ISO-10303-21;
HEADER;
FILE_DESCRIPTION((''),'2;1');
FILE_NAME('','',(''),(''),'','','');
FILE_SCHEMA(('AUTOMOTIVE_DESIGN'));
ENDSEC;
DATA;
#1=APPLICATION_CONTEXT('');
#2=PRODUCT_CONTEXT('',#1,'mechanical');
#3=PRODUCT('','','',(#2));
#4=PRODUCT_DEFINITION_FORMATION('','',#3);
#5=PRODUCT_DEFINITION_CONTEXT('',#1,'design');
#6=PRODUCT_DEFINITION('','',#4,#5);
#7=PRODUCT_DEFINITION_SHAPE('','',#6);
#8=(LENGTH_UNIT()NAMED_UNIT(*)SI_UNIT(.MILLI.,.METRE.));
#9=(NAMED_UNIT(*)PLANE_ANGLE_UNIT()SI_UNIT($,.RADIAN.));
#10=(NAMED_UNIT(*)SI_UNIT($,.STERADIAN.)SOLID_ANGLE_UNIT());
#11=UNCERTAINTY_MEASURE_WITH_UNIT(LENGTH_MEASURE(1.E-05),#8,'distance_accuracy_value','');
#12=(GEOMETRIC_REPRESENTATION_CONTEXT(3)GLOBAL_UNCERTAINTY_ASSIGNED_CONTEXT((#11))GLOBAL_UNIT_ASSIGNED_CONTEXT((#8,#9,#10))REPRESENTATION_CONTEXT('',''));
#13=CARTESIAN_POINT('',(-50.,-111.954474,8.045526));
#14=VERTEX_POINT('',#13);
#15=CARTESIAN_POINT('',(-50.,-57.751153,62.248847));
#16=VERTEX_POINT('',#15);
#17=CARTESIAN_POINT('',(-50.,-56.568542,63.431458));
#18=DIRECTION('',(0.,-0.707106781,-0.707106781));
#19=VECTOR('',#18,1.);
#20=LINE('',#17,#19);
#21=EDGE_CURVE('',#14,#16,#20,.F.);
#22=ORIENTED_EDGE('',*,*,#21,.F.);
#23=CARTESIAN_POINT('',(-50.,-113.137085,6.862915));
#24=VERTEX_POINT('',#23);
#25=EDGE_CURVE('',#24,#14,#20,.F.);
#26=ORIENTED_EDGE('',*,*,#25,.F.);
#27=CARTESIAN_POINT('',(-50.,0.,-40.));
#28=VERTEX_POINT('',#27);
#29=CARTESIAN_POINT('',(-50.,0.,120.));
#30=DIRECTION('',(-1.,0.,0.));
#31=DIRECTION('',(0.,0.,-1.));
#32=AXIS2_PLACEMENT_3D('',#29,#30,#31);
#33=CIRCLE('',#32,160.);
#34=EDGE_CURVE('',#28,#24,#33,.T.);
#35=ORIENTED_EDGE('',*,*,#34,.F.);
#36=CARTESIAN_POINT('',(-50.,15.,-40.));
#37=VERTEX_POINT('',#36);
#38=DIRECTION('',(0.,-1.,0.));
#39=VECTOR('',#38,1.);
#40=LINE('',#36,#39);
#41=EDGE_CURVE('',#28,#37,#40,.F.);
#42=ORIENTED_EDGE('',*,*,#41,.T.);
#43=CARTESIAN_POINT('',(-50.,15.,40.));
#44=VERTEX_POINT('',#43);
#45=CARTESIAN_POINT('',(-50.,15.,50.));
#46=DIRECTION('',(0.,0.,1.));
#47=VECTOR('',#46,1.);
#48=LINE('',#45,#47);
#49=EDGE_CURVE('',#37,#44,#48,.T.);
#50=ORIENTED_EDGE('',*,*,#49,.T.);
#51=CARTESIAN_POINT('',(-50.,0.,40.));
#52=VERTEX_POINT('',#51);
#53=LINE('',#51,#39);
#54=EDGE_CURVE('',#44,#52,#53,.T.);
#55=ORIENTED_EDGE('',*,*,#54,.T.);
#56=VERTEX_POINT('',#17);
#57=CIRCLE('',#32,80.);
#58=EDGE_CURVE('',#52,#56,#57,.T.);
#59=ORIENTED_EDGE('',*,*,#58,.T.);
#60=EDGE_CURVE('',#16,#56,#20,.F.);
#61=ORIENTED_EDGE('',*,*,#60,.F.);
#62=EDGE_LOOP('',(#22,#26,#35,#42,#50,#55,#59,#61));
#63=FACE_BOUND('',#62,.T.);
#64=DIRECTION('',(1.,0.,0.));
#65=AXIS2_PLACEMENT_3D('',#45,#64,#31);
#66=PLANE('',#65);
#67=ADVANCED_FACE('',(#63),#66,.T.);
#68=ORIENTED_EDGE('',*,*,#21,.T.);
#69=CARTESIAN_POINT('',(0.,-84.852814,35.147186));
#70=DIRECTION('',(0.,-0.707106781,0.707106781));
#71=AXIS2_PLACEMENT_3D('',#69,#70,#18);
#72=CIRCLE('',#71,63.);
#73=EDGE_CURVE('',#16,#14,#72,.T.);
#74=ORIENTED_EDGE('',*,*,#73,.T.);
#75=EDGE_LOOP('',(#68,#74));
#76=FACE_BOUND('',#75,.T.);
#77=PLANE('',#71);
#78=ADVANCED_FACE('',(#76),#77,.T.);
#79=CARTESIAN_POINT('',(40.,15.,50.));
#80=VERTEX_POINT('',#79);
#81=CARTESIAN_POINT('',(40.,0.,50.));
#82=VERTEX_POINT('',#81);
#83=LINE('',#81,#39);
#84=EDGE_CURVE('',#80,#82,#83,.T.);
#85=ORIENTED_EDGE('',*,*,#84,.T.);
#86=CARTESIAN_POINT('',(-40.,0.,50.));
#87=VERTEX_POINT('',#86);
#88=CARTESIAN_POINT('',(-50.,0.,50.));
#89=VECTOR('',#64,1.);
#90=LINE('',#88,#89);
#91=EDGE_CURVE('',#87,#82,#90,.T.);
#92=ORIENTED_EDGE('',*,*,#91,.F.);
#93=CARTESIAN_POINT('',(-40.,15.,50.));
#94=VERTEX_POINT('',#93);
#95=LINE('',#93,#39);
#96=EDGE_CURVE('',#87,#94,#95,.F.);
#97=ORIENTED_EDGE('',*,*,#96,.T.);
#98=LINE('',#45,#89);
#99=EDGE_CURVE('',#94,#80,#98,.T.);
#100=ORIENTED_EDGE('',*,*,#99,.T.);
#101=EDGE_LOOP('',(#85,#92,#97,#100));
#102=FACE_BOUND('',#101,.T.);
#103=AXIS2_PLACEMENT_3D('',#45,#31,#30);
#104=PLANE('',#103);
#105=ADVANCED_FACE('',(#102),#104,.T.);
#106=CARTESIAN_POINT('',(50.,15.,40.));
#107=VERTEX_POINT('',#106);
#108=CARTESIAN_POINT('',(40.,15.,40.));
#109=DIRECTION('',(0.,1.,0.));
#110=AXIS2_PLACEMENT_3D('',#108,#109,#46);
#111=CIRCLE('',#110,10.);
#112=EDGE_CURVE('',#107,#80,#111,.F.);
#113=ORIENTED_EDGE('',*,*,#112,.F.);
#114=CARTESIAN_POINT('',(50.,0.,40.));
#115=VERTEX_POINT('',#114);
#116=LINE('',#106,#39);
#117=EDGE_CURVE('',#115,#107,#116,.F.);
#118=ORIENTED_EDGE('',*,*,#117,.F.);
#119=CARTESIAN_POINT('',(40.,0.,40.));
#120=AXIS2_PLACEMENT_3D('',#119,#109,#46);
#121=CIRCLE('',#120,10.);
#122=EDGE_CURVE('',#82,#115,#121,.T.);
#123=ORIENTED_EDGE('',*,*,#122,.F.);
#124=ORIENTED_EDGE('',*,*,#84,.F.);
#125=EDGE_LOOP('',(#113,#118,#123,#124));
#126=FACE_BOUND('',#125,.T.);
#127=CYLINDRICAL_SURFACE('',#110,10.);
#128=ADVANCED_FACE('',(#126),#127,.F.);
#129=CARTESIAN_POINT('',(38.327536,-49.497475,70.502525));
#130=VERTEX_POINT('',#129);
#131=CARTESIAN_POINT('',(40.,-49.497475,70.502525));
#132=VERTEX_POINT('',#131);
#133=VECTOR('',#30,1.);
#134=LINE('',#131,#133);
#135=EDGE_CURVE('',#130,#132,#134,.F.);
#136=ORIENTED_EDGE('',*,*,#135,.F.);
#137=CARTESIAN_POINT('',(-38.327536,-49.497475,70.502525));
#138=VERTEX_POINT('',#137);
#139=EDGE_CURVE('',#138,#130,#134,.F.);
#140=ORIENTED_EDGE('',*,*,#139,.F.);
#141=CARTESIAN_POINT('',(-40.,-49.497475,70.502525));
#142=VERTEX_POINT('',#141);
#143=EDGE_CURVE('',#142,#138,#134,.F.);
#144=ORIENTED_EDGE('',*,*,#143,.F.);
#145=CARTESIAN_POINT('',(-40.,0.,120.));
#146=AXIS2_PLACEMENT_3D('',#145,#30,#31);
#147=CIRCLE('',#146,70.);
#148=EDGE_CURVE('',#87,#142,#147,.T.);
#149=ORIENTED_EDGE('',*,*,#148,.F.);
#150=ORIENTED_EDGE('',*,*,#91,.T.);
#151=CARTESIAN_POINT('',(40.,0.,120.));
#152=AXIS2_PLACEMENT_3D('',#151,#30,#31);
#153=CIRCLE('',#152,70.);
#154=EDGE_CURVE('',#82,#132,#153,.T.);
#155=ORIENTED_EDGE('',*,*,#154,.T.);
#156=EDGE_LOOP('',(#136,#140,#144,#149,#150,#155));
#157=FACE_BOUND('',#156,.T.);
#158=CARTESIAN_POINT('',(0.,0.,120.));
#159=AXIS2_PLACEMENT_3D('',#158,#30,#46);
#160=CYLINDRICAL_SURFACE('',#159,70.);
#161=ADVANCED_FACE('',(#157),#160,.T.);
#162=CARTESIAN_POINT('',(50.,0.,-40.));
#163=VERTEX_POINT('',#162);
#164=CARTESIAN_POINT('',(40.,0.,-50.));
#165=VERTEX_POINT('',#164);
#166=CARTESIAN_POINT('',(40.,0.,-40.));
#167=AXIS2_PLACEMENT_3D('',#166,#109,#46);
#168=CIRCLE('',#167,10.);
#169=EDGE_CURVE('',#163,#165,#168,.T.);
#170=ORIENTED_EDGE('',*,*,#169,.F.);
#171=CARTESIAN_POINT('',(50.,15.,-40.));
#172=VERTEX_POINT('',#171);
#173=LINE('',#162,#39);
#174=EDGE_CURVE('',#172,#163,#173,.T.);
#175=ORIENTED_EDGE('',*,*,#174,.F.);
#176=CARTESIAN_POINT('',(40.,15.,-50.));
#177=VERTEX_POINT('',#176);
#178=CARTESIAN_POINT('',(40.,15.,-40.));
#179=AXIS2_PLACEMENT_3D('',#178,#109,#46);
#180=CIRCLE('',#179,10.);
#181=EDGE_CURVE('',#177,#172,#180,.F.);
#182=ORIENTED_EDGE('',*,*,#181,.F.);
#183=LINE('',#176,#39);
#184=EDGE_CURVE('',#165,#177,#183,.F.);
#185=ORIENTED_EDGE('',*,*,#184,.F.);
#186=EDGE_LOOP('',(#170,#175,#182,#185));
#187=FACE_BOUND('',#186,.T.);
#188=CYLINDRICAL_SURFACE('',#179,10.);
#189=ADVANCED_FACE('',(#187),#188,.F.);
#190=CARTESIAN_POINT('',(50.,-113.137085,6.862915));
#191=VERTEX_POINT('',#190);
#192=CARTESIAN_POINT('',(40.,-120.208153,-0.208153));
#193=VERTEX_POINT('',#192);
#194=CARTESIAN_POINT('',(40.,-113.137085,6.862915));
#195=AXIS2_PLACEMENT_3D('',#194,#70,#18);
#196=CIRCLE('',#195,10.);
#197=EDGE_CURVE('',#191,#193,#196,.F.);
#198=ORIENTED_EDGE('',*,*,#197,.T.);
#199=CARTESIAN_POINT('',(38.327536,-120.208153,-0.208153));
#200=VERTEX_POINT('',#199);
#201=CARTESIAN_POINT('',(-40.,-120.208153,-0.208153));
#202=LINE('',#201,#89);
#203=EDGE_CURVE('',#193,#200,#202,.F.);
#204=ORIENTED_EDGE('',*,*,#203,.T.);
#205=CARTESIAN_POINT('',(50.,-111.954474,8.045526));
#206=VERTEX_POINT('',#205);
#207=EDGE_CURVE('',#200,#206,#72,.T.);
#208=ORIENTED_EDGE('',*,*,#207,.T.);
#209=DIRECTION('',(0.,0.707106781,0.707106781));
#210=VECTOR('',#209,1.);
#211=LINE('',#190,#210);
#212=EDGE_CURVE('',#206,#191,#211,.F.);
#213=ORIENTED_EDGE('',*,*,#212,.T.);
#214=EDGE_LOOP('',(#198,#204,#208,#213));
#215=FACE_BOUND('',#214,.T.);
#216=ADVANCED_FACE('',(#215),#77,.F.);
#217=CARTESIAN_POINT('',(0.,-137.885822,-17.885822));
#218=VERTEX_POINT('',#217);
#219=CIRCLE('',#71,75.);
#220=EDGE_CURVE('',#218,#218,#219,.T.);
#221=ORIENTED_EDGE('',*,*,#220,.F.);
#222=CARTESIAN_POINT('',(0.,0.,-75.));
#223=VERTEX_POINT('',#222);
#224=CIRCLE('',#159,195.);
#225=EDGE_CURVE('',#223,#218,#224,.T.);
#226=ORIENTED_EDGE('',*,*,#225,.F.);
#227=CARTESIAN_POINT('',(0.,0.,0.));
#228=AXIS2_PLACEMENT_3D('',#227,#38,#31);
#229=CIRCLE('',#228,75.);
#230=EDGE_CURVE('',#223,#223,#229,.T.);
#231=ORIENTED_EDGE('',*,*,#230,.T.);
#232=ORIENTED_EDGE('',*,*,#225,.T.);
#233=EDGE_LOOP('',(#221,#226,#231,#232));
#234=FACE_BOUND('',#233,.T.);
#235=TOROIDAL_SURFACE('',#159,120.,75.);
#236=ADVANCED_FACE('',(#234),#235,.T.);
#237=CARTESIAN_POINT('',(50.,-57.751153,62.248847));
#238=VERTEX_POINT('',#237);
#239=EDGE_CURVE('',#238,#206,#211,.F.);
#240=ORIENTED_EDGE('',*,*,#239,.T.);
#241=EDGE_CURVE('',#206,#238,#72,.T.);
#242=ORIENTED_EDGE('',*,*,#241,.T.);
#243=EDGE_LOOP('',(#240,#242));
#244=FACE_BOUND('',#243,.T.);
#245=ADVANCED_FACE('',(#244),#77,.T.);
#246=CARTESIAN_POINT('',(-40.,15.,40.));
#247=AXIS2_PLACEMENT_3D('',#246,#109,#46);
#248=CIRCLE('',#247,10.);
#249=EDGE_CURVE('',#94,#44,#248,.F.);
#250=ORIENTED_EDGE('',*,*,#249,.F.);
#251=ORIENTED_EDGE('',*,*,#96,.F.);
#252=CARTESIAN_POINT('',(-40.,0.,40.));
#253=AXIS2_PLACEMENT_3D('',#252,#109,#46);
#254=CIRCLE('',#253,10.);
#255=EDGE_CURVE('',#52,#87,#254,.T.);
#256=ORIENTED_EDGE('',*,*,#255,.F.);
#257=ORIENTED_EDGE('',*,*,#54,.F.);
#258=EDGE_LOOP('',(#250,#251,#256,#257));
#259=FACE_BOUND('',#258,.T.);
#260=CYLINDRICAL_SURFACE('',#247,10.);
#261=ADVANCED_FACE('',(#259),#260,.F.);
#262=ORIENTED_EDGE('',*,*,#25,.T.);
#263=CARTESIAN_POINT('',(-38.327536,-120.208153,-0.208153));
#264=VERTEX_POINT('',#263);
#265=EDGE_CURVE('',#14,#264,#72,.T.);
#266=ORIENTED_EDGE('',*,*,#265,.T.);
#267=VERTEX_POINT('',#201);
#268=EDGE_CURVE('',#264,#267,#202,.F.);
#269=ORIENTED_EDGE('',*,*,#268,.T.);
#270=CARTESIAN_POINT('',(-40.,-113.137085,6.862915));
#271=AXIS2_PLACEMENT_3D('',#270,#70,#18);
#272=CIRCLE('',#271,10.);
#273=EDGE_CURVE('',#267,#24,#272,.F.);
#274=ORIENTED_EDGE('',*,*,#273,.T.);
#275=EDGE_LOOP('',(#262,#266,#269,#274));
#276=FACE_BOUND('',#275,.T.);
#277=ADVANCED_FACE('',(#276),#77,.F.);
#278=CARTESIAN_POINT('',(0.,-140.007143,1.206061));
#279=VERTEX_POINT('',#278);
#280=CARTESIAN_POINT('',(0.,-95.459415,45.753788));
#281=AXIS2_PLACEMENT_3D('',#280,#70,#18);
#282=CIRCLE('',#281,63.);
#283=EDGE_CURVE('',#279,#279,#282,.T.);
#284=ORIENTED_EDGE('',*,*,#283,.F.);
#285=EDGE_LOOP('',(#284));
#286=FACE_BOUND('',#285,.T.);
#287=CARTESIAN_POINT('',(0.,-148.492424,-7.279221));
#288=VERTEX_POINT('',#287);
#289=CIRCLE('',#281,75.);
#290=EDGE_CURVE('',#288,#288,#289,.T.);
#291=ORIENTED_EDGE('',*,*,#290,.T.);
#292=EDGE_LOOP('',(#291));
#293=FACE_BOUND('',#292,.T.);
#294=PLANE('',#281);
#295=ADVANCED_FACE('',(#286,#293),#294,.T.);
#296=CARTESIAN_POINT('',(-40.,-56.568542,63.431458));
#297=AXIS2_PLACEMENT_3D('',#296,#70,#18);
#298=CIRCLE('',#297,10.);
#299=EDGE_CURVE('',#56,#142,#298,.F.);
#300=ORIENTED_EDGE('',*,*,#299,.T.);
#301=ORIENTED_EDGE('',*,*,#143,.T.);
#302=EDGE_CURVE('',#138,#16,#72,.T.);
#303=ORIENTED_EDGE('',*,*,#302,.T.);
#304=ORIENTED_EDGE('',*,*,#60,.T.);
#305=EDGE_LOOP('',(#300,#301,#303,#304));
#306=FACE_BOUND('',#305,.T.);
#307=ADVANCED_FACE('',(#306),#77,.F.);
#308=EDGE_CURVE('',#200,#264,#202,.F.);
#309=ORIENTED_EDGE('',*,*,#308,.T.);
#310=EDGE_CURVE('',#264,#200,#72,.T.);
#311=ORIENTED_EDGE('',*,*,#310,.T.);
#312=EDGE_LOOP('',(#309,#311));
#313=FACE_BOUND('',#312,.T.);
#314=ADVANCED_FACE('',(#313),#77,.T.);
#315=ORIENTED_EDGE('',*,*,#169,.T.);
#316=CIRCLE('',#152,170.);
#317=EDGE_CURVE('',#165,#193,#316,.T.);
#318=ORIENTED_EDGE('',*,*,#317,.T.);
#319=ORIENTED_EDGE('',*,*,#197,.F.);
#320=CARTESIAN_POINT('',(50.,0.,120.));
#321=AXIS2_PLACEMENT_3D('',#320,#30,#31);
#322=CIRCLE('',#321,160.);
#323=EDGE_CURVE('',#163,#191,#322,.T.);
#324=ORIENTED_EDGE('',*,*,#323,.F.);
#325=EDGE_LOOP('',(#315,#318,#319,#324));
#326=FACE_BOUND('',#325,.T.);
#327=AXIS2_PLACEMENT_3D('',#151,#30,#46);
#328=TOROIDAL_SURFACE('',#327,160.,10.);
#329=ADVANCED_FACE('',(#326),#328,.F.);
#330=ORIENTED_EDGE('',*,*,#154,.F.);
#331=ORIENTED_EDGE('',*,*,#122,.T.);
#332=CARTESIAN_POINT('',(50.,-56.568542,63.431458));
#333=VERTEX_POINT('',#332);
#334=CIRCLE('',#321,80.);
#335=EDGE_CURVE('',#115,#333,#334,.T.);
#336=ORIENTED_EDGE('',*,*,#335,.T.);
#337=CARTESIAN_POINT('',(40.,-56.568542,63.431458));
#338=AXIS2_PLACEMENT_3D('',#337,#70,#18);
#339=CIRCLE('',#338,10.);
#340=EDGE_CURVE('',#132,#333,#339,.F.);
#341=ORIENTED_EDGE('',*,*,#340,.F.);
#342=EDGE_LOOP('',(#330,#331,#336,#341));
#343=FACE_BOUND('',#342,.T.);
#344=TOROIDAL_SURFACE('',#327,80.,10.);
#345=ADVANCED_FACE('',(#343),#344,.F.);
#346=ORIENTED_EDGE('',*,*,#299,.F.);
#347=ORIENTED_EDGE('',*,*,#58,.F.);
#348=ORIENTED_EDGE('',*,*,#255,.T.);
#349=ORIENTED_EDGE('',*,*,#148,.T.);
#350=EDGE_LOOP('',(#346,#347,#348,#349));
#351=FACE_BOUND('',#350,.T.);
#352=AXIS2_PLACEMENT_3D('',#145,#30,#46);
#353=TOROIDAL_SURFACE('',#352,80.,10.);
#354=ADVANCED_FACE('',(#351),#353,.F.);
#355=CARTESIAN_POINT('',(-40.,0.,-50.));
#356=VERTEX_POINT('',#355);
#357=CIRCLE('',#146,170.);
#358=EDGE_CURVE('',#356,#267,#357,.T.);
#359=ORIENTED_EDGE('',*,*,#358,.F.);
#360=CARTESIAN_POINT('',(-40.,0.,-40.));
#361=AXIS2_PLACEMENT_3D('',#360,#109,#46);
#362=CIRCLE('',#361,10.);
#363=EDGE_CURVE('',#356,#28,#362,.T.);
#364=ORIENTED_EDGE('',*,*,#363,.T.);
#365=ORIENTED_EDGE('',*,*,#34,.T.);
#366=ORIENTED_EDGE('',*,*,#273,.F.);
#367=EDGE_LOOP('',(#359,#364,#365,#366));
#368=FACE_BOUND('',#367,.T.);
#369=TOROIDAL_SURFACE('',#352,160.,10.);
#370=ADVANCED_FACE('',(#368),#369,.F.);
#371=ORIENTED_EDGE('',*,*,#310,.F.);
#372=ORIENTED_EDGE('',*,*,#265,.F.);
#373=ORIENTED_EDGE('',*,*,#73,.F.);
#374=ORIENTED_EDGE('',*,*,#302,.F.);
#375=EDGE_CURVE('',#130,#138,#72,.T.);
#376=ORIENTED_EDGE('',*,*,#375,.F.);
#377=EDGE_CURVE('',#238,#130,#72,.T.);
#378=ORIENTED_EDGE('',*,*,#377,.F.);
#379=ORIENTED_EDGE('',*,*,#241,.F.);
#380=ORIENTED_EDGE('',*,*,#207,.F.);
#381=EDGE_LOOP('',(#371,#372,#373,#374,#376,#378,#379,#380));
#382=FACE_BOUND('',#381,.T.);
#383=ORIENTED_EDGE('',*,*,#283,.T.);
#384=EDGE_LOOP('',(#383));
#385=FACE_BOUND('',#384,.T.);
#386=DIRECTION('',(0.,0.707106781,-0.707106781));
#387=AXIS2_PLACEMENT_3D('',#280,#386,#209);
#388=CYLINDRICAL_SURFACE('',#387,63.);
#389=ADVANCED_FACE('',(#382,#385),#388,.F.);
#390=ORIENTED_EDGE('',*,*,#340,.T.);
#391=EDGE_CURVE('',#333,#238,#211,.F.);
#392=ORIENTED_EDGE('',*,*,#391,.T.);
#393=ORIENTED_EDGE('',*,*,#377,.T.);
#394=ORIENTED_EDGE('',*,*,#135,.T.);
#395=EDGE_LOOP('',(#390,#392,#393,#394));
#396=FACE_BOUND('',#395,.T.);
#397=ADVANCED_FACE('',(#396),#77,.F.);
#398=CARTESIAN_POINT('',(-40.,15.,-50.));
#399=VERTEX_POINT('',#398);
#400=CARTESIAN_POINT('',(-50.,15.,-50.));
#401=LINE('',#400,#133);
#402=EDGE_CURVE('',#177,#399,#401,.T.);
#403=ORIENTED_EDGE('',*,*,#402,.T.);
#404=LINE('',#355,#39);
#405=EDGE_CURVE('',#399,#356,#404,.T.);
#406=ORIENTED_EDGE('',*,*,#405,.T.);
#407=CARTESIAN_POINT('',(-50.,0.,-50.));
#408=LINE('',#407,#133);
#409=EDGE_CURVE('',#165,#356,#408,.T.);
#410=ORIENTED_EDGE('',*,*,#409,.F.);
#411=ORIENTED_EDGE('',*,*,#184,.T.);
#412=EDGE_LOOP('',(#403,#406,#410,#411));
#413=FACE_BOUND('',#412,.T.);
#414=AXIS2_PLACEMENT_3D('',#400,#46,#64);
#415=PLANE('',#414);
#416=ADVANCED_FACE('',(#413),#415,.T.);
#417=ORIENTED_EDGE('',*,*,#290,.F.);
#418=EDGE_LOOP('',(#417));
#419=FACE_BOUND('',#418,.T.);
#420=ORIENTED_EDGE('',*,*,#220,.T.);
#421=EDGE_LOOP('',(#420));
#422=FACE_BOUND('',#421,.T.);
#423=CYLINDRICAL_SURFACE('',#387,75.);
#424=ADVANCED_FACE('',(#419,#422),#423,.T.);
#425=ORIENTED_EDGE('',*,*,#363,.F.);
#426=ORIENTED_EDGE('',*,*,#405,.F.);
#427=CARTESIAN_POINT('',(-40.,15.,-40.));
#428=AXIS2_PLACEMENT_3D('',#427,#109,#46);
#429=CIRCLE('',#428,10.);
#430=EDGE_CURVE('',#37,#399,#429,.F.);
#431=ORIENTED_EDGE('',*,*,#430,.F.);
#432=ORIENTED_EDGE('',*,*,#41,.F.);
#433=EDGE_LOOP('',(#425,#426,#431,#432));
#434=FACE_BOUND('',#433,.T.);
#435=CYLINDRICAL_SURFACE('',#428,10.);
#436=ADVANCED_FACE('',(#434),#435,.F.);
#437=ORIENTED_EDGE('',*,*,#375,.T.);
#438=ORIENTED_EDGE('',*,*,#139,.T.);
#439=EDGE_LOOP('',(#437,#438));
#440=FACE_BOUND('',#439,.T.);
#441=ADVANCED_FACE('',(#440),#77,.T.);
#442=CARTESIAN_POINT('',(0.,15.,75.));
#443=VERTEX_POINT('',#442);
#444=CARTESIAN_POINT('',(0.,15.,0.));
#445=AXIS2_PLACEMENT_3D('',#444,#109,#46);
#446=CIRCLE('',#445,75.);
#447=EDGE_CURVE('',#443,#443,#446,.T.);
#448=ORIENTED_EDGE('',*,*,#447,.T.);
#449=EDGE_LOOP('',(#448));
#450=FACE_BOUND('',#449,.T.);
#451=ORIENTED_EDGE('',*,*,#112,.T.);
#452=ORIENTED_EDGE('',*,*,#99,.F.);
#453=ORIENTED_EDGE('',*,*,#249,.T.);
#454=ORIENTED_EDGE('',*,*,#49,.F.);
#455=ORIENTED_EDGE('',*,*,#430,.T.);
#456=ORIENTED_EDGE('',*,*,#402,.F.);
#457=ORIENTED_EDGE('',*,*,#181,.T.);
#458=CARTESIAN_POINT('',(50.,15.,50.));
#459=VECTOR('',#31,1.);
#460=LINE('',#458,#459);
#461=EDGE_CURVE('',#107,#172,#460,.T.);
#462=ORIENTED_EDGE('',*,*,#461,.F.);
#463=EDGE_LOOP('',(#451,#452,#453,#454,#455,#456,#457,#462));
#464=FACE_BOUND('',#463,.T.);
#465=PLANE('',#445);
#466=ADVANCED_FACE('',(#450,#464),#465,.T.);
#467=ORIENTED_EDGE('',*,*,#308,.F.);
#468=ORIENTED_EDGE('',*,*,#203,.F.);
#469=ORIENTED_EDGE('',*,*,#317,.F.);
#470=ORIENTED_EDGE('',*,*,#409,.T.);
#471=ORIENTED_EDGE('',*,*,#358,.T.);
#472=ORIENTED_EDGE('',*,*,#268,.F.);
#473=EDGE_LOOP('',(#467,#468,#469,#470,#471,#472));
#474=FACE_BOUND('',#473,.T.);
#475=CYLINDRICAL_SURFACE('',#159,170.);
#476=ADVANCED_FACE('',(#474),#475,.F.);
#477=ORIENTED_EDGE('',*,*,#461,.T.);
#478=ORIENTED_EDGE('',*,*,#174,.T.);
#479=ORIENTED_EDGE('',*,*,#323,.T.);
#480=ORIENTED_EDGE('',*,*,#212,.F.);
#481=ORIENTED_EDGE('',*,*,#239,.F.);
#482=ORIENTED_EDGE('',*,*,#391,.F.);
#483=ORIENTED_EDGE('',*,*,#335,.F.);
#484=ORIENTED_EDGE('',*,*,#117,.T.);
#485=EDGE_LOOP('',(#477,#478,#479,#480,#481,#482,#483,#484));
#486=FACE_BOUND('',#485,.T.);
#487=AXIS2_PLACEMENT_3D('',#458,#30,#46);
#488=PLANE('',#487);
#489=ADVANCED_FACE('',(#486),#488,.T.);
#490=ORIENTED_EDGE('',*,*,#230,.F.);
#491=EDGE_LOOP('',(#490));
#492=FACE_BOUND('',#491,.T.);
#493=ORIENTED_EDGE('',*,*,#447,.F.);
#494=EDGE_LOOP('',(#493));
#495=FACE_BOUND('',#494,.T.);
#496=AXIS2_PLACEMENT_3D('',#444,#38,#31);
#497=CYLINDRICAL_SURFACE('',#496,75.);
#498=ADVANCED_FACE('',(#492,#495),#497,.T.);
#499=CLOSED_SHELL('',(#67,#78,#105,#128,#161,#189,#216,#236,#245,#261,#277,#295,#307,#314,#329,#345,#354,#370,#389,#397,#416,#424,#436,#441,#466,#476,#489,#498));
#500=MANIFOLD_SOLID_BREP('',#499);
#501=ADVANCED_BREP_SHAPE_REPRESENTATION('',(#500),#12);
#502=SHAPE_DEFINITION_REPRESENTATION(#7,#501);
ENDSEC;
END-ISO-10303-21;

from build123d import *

# Parameters (mm, degrees)
CROQUIS1_R              = 75
CROQUIS1_W              = 100
CROQUIS1_H              = 100
SALIENTE_EXTRUIR1_DEPTH = 15
REDONDEO1_R             = 10
BARRER1_OUTLINE_R       = 75
BARRER1_ANGLE           = 45
CROQUIS6_R              = 75
CROQUIS6_R_2            = 63
SALIENTE_EXTRUIR3_DEPTH = 15


# Read off the part's stored shape, not the designer's step: Barrer1
with BuildPart() as part:
    # Croquis1 → Saliente-Extruir1 (new body)
    with BuildSketch(Plane(origin=(0, 0, 0), x_dir=(1, 0, 0), z_dir=(0, 1, 0))):
        with Locations(Location((0, 0, 0), (0, 0, 270))):
            Circle(CROQUIS1_R)
        Rectangle(CROQUIS1_W, CROQUIS1_H, mode=Mode.SUBTRACT)
    extrude(amount=SALIENTE_EXTRUIR1_DEPTH)

    # Redondeo1
    redondeo1_edges = [part.edges().sort_by_distance(p)[0] for p in [
        (50, 7.5, 50),
        (50, 7.5, -50),
        (-50, 7.5, -50),
        (-50, 7.5, 50),
    ]]
    fillet(redondeo1_edges, radius=REDONDEO1_R)

    # Barrer1 outline → Barrer1 (revolve)
    with BuildSketch(Plane(origin=(0, 0, 120), x_dir=(0, -0.7071067811865493, -0.7071067811865457), z_dir=(0, -0.7071067811865457, 0.7071067811865493))):
        with Locations((120, 0)):
            Circle(BARRER1_OUTLINE_R)
        with BuildLine():
            Line((80, 50), (160, 50))
            ThreePointArc((160, 50), (167.071067812, 47.071067812), (170, 40))
            Line((170, 40), (170, -40))
            ThreePointArc((170, -40), (167.071067812, -47.071067812), (160, -50))
            Line((160, -50), (80, -50))
            ThreePointArc((80, -50), (72.928932188, -47.071067812), (70, -40))
            Line((70, -40), (70, 40))
            ThreePointArc((70, 40), (72.928932188, 47.071067812), (80, 50))
        make_face(mode=Mode.SUBTRACT)
    revolve(axis=Axis((0, 0, 120), (1, 0, 0)), revolution_arc=BARRER1_ANGLE)

    # Croquis6 → Saliente-Extruir3 (add)
    with BuildSketch(Plane(origin=(0, -60, 60), x_dir=(1, 0, 0), z_dir=(0, -0.7071067811865467, 0.7071067811865485))):
        with Locations(Location((0, -35.147186258, 0), (0, 0, 270))):
            Circle(CROQUIS6_R)
        with Locations(Location((0, -35.147186258, 0), (0, 0, 52.528004817))):
            Circle(CROQUIS6_R_2, mode=Mode.SUBTRACT)
    extrude(amount=SALIENTE_EXTRUIR3_DEPTH)


solid = part.part
